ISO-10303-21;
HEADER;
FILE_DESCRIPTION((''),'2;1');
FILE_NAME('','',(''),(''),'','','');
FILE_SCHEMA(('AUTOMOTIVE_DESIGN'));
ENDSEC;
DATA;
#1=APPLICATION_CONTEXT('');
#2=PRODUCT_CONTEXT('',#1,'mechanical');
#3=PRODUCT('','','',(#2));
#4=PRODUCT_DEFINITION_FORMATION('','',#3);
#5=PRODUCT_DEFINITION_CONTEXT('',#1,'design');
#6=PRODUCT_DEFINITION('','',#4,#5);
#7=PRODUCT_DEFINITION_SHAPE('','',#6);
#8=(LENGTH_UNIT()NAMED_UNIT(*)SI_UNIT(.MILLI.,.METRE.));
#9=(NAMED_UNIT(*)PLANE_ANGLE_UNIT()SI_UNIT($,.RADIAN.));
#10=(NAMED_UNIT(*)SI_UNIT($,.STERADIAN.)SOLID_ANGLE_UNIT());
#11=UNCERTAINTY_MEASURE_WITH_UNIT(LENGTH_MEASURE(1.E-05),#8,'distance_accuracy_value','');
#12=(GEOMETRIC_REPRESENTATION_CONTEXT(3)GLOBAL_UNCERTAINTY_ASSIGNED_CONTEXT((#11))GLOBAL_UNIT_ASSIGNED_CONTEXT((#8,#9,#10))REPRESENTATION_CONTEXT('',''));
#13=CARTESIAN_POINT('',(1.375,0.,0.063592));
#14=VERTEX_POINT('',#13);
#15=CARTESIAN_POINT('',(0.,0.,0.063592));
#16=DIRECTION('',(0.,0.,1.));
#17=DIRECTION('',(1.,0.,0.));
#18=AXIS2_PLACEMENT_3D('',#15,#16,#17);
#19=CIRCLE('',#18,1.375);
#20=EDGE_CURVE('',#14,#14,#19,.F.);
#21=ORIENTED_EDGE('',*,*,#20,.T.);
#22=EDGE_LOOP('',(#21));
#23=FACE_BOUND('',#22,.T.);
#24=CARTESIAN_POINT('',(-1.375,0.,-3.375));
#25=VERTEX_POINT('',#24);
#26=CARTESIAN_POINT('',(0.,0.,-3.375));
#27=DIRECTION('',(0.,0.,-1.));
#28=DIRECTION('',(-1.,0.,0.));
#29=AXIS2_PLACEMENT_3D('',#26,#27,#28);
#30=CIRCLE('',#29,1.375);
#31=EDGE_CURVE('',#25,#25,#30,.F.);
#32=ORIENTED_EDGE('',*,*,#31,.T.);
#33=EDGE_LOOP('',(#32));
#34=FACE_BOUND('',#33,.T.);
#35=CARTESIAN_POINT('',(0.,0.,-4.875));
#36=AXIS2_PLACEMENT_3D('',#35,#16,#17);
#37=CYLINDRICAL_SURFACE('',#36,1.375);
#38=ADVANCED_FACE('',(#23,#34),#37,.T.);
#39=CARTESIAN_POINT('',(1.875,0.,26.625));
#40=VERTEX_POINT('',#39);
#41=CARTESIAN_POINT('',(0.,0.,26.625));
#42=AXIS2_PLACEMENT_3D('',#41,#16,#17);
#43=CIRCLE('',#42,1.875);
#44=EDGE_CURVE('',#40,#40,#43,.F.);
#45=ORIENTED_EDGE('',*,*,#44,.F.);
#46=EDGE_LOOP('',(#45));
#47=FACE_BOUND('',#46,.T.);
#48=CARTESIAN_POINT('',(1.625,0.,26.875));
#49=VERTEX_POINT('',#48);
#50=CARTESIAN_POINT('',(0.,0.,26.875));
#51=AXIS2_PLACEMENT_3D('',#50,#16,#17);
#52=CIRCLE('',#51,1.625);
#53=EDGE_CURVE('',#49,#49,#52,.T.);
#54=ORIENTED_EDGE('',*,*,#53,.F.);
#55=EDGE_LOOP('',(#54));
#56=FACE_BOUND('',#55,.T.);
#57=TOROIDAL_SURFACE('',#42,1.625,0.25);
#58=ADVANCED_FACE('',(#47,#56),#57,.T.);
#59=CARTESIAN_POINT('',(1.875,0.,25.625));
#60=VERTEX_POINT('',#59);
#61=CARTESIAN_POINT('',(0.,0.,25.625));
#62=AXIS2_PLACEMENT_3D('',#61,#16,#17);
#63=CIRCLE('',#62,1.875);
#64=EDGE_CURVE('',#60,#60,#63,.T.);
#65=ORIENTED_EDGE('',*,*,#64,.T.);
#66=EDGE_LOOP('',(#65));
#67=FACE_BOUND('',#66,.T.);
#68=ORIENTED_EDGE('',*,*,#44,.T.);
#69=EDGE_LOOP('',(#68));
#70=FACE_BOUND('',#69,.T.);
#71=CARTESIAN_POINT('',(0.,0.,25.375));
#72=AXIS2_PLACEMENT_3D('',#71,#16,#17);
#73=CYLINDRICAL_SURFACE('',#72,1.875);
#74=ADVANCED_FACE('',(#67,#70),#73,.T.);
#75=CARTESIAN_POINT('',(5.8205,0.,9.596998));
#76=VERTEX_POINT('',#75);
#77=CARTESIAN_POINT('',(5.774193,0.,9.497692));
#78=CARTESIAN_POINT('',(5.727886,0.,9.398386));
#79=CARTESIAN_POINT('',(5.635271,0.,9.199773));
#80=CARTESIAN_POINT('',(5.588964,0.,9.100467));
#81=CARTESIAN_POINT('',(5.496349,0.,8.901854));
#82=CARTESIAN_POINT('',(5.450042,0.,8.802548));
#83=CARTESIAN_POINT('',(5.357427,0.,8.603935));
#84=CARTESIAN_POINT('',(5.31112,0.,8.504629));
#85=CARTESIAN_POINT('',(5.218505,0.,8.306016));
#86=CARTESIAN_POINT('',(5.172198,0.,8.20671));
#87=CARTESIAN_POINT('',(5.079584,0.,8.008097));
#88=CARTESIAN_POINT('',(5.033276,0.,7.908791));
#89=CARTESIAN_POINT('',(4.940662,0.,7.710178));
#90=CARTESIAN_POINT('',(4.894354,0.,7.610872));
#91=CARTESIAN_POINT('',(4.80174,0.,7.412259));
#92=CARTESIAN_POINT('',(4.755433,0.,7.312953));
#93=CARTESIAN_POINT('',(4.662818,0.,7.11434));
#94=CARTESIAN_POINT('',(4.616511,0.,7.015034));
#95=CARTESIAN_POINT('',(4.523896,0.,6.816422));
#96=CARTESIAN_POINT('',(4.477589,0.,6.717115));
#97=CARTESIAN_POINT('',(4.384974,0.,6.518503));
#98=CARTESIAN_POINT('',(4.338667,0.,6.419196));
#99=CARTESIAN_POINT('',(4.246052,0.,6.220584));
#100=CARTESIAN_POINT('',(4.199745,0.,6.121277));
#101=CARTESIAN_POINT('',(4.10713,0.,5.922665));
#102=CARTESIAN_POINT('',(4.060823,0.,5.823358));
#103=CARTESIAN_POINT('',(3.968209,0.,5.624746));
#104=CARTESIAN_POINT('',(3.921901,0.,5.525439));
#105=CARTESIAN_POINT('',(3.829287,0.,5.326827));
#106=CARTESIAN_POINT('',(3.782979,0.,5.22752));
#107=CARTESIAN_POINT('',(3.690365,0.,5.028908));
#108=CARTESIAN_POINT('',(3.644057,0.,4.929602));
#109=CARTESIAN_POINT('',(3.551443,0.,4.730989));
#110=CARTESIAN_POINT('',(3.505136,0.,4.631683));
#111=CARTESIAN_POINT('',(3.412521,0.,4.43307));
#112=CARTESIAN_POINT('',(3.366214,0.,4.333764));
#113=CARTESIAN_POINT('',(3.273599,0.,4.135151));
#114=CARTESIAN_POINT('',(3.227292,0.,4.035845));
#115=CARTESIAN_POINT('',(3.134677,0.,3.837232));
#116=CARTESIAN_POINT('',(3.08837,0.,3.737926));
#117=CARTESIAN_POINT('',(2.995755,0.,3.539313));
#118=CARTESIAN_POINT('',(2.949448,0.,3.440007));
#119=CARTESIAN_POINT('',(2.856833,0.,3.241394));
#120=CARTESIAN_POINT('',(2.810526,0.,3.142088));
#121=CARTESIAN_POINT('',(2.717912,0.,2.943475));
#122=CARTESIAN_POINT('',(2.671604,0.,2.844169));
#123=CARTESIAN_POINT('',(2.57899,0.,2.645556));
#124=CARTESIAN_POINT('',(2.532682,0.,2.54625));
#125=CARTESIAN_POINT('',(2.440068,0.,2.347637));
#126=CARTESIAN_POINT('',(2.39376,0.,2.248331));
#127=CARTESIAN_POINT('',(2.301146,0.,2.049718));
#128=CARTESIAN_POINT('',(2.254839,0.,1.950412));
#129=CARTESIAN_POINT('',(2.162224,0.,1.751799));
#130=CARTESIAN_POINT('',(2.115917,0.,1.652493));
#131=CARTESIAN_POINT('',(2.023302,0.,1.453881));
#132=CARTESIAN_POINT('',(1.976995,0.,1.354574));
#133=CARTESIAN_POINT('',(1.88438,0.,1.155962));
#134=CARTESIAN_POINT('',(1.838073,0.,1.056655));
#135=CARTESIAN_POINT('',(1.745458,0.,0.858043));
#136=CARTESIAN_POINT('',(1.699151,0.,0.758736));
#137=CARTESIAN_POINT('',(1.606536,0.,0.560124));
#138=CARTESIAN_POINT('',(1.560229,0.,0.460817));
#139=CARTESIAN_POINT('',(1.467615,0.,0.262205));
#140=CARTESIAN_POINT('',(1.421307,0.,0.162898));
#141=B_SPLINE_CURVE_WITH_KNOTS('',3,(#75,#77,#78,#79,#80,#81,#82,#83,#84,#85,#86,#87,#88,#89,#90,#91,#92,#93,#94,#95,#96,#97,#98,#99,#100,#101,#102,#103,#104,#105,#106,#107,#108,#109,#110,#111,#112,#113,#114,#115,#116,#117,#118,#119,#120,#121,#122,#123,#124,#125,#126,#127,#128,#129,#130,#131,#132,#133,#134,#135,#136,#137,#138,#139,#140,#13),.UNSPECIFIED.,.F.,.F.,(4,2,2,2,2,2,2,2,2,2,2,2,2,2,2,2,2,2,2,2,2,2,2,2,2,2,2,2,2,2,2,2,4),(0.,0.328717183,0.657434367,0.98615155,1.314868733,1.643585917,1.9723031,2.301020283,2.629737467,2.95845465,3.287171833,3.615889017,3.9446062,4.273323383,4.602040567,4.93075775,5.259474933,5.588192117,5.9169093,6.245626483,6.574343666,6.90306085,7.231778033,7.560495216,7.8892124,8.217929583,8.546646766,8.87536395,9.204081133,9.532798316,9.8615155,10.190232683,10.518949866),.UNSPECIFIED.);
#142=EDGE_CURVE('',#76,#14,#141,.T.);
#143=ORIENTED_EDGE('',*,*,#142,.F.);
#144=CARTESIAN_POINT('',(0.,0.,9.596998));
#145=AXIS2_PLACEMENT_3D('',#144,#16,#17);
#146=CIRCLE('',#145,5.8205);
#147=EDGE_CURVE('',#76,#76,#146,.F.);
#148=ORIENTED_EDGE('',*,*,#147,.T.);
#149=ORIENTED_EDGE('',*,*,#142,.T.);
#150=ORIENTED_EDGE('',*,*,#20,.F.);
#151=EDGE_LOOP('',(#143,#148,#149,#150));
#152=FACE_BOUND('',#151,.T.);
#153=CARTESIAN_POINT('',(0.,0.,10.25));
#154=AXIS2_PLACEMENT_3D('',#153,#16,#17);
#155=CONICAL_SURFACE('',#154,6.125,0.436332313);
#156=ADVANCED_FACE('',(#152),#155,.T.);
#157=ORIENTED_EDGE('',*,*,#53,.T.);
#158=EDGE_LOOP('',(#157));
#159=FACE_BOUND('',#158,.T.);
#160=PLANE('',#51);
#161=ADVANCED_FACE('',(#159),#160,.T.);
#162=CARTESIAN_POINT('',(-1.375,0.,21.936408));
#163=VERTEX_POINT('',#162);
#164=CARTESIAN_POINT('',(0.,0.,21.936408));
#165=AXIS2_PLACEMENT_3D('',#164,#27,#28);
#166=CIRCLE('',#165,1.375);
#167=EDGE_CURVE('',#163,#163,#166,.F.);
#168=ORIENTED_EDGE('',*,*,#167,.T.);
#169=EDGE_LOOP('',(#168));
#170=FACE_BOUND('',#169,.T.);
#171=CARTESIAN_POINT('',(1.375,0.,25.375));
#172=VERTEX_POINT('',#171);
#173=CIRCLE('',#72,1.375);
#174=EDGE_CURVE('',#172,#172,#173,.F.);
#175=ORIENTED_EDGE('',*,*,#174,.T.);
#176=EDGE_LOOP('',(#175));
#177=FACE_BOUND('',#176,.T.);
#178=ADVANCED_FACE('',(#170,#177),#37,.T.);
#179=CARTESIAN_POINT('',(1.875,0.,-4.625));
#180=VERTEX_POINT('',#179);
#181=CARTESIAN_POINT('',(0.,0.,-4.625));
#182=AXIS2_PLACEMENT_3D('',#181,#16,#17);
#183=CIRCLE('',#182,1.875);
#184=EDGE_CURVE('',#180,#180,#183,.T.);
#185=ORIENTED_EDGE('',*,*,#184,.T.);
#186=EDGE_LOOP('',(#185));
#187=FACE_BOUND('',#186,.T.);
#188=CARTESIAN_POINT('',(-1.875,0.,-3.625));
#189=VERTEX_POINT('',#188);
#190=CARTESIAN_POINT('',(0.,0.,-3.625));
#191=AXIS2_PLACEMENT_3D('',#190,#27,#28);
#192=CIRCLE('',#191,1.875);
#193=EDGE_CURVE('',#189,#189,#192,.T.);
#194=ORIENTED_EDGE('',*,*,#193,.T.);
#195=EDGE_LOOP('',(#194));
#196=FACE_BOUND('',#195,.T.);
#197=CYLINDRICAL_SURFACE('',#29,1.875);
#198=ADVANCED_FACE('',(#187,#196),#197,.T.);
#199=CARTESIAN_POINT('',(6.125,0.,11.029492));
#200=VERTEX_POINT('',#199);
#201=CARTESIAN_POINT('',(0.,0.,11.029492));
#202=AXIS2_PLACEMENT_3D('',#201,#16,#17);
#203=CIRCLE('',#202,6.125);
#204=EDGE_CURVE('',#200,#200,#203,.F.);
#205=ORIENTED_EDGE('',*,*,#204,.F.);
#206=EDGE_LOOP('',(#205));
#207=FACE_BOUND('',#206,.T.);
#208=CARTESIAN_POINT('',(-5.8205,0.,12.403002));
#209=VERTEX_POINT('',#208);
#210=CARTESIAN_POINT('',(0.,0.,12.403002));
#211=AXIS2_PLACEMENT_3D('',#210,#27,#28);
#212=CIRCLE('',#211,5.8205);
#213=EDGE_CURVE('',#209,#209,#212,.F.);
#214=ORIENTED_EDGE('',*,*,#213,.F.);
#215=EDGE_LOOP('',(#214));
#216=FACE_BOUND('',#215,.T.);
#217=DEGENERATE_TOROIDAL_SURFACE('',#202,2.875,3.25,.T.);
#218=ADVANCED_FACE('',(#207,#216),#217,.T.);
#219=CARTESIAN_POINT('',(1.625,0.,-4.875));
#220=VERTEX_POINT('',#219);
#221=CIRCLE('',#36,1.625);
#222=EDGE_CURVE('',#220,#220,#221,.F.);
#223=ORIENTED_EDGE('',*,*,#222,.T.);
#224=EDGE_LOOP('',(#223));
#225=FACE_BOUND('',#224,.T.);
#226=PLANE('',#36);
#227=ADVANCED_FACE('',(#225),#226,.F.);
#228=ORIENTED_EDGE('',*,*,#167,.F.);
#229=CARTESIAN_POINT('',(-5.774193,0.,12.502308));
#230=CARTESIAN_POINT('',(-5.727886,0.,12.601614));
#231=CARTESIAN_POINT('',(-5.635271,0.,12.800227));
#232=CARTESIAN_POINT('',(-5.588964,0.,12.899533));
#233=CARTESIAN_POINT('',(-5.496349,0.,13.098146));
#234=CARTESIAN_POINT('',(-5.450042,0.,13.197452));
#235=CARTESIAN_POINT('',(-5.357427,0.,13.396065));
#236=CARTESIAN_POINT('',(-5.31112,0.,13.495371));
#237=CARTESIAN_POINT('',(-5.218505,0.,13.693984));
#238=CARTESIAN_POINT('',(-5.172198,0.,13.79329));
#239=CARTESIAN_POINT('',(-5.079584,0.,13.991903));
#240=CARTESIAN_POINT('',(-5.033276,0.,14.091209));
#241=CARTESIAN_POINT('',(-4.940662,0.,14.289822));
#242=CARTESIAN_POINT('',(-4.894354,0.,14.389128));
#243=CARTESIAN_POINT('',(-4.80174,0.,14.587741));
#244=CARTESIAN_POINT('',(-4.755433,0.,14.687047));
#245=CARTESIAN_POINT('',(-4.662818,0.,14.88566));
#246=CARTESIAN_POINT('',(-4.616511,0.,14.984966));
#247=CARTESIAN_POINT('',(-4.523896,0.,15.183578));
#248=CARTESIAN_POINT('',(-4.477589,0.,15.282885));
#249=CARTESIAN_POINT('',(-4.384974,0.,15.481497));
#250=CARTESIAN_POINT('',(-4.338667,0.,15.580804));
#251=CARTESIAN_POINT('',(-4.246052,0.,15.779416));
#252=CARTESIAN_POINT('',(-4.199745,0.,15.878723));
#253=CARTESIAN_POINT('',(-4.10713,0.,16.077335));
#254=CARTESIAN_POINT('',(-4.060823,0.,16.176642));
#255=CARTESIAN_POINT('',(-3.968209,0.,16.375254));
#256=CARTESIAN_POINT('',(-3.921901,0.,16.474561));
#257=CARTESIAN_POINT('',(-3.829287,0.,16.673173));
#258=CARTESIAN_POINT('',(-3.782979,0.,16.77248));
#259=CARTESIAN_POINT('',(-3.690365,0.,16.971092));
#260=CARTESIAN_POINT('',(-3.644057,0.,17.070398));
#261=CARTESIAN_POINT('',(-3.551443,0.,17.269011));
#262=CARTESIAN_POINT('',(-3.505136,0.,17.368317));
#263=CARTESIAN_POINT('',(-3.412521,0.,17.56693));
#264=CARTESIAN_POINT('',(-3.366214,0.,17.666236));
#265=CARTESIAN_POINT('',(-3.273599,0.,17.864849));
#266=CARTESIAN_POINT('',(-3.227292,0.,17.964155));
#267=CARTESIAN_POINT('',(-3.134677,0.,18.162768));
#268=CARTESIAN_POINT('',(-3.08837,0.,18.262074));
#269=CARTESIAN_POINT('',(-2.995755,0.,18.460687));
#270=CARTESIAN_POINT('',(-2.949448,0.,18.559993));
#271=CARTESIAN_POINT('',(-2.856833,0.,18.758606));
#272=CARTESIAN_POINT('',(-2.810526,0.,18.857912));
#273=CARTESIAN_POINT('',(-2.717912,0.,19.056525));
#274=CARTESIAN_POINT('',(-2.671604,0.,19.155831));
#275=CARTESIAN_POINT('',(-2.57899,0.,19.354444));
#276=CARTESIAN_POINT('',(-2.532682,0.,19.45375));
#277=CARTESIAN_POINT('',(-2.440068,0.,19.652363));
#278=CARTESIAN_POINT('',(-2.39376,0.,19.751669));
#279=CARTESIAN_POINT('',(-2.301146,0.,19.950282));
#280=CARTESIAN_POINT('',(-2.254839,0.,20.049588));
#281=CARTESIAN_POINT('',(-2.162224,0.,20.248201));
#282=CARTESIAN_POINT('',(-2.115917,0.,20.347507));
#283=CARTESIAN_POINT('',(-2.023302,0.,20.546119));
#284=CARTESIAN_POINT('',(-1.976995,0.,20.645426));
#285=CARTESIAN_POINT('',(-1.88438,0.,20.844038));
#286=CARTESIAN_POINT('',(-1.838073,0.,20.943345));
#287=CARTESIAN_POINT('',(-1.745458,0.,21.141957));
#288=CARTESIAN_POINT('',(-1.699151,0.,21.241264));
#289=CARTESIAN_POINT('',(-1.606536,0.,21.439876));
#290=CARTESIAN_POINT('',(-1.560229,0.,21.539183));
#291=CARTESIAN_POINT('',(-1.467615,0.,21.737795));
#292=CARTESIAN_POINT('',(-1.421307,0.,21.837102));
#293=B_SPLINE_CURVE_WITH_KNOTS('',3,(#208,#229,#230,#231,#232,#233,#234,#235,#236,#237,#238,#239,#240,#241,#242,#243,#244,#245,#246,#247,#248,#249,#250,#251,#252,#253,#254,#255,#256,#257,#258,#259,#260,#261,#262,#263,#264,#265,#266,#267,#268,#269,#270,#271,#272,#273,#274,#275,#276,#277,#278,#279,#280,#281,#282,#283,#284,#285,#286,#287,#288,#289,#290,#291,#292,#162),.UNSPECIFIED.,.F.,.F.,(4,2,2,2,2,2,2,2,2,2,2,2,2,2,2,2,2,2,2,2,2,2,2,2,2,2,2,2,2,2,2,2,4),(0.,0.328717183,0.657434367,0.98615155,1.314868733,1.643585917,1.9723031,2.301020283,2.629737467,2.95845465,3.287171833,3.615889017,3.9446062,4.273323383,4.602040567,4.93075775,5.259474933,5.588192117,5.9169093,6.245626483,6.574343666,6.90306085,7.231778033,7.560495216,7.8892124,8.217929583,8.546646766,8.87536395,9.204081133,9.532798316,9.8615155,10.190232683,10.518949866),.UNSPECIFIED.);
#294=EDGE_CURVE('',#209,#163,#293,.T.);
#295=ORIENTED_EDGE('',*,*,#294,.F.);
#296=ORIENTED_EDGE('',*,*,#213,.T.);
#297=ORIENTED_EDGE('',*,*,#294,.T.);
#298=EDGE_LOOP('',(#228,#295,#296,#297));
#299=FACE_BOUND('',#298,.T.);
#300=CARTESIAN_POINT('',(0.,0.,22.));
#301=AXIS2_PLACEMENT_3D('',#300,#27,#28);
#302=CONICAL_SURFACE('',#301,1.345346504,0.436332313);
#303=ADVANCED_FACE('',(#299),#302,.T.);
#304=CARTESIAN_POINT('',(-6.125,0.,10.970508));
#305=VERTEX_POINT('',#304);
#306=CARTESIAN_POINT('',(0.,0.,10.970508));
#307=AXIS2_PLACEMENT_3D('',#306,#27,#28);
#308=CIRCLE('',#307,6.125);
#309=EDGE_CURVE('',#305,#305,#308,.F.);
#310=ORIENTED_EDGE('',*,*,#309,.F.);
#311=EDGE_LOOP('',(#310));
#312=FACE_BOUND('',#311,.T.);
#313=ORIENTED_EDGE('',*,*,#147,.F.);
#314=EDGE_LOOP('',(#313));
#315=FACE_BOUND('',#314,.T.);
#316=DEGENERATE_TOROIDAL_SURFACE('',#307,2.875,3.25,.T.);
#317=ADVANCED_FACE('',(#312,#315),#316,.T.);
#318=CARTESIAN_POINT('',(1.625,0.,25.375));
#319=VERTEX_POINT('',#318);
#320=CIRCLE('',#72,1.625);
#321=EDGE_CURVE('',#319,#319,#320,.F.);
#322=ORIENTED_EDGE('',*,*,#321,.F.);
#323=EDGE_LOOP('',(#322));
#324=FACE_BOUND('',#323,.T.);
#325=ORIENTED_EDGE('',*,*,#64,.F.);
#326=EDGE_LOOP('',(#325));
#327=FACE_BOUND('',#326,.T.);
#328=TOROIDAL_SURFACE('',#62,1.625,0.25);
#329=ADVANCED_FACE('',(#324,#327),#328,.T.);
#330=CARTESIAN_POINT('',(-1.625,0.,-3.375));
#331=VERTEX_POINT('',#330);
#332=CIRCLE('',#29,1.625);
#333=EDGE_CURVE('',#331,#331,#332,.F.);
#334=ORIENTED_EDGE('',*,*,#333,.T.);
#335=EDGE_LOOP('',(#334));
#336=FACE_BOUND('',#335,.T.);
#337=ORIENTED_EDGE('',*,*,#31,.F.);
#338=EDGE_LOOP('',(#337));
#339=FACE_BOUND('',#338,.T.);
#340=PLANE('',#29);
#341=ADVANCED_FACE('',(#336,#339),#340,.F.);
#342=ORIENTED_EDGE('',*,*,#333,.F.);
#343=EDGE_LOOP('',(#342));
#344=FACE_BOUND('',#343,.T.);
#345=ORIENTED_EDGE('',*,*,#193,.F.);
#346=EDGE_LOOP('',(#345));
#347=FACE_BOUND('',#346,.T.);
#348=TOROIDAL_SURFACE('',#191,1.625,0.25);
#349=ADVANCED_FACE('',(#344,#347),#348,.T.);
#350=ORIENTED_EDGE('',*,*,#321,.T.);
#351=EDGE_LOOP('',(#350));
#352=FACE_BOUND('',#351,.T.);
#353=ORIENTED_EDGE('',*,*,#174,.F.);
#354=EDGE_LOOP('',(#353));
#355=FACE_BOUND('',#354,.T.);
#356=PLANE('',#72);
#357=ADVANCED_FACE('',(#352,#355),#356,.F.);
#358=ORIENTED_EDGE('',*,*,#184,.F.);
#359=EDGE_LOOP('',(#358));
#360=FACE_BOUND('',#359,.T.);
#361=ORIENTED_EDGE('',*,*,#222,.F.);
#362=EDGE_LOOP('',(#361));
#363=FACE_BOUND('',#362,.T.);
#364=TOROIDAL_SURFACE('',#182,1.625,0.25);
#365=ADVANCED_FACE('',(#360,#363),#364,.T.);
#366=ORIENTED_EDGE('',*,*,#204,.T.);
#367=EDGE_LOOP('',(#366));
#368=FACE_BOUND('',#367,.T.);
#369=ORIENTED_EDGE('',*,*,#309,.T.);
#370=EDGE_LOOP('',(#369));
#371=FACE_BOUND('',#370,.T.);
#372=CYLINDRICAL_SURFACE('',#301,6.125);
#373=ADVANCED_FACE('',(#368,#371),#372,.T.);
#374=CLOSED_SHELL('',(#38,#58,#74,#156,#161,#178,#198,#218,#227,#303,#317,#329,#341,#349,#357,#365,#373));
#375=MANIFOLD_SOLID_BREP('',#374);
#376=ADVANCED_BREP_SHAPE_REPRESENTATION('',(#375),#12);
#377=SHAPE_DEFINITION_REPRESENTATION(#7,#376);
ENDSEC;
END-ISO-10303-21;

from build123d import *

# Parameters (mm, degrees)
ESQUISSE1_R             = 6.125
BOSS_EXTRU_1_DEPTH      = 22
BOSS_EXTRU_2_DEPTH      = 15.875
BOSS_EXTRU_2_DEPTH_BACK = 15.875
BOSS_EXTRU_2_START      = -11
ESQUISSE2_R             = 1.375
ESQUISSE3_R             = 1.875
BOSS_EXTRU_3_DEPTH      = 1.5
BOSS_EXTRU_4_START      = -1.5
ESQUISSE4_R             = 1.875
BOSS_EXTRU_4_DEPTH      = 1.5
CHANFREIN1_SIZE         = 10.25
CHANFREIN1_SIZE_2       = 4.779653496
CONG_1_R                = 3.25
CONG_2_R                = 0.25


with BuildPart() as part:
    # Esquisse1 → Boss.-Extru.1 (new body)
    with BuildSketch(Plane.XY):
        Circle(ESQUISSE1_R)
    extrude(amount=BOSS_EXTRU_1_DEPTH)

    # Esquisse2 → Boss.-Extru.2 (add, two sides: drawn at the far end of the back side and taken through both)
    with BuildSketch(Plane.XY.offset(22).offset(BOSS_EXTRU_2_START - BOSS_EXTRU_2_DEPTH_BACK)):
        Circle(ESQUISSE2_R)
    extrude(amount=BOSS_EXTRU_2_DEPTH + BOSS_EXTRU_2_DEPTH_BACK)

    # Esquisse3 → Boss.-Extru.3 (add)
    with BuildSketch(Plane(origin=(0, 0, -4.875), x_dir=(-1, 0, 0), z_dir=(0, 0, -1))):
        Circle(ESQUISSE3_R)
    extrude(amount=-BOSS_EXTRU_3_DEPTH)

    # Esquisse4 → Boss.-Extru.4 (add)
    with BuildSketch(Plane.XY.offset(26.875).offset(BOSS_EXTRU_4_START)):
        with Locations(Location((0, 0, 0), (0, 0, 180))):
            Circle(ESQUISSE4_R)
    extrude(amount=BOSS_EXTRU_4_DEPTH)

    # Chanfrein1
    # the kernel refuses this chamfer: 10.25, 4.779653496 mm, written as the material it takes off along each edge
    with BuildSketch(Plane(origin=(0, 0, 22), x_dir=(1, 0, 0), z_dir=(0, -1, 0))) as chanfrein1_piece_1_section:
        Polygon((6.125, -CHANFREIN1_SIZE), (6.125 - CHANFREIN1_SIZE_2, 0), (6.125, 0), align=None)
    chanfrein1_piece_1 = revolve(axis=Axis((0, 0, 22), (0, 0, 1)), mode=Mode.PRIVATE)
    chanfrein1_piece_1 = chanfrein1_piece_1 - Plane(origin=(0, 0, 16.69695502), x_dir=(1, 0, 0), z_dir=(0, 0, -1)) * Cylinder(1.375, 41, mode=Mode.PRIVATE)
    add(chanfrein1_piece_1, mode=Mode.SUBTRACT)
    with BuildSketch(Plane(origin=(0, 0, 0), x_dir=(1, 0, 0), z_dir=(0, -1, 0))) as chanfrein1_piece_2_section:
        Polygon((6.125, CHANFREIN1_SIZE), (6.125 - CHANFREIN1_SIZE_2, 0), (6.125, 0), align=None)
    chanfrein1_piece_2 = revolve(axis=Axis((0, 0, 0), (0, 0, 1)), mode=Mode.PRIVATE)
    chanfrein1_piece_2 = chanfrein1_piece_2 - Plane(origin=(0, 0, 5.30304498), x_dir=(1, 0, 0), z_dir=(0, 0, 1)) * Cylinder(1.375, 41, mode=Mode.PRIVATE)
    add(chanfrein1_piece_2, mode=Mode.SUBTRACT)

    # Congé1
    cong_1_edges = [part.edges().sort_by_distance(p)[0] for p in [
        (-6.125, 0, 11.75),
        (-6.125, 0, 10.25),
    ]]
    fillet(cong_1_edges, radius=CONG_1_R)

    # Congé2
    cong_2_edges = [part.edges().sort_by_distance(p)[0] for p in [
        (1.875, 0, -3.375),
        (1.875, 0, -4.875),
        (1.875, 0, 25.375),
        (1.875, 0, 26.875),
    ]]
    fillet(cong_2_edges, radius=CONG_2_R)


solid = part.part
